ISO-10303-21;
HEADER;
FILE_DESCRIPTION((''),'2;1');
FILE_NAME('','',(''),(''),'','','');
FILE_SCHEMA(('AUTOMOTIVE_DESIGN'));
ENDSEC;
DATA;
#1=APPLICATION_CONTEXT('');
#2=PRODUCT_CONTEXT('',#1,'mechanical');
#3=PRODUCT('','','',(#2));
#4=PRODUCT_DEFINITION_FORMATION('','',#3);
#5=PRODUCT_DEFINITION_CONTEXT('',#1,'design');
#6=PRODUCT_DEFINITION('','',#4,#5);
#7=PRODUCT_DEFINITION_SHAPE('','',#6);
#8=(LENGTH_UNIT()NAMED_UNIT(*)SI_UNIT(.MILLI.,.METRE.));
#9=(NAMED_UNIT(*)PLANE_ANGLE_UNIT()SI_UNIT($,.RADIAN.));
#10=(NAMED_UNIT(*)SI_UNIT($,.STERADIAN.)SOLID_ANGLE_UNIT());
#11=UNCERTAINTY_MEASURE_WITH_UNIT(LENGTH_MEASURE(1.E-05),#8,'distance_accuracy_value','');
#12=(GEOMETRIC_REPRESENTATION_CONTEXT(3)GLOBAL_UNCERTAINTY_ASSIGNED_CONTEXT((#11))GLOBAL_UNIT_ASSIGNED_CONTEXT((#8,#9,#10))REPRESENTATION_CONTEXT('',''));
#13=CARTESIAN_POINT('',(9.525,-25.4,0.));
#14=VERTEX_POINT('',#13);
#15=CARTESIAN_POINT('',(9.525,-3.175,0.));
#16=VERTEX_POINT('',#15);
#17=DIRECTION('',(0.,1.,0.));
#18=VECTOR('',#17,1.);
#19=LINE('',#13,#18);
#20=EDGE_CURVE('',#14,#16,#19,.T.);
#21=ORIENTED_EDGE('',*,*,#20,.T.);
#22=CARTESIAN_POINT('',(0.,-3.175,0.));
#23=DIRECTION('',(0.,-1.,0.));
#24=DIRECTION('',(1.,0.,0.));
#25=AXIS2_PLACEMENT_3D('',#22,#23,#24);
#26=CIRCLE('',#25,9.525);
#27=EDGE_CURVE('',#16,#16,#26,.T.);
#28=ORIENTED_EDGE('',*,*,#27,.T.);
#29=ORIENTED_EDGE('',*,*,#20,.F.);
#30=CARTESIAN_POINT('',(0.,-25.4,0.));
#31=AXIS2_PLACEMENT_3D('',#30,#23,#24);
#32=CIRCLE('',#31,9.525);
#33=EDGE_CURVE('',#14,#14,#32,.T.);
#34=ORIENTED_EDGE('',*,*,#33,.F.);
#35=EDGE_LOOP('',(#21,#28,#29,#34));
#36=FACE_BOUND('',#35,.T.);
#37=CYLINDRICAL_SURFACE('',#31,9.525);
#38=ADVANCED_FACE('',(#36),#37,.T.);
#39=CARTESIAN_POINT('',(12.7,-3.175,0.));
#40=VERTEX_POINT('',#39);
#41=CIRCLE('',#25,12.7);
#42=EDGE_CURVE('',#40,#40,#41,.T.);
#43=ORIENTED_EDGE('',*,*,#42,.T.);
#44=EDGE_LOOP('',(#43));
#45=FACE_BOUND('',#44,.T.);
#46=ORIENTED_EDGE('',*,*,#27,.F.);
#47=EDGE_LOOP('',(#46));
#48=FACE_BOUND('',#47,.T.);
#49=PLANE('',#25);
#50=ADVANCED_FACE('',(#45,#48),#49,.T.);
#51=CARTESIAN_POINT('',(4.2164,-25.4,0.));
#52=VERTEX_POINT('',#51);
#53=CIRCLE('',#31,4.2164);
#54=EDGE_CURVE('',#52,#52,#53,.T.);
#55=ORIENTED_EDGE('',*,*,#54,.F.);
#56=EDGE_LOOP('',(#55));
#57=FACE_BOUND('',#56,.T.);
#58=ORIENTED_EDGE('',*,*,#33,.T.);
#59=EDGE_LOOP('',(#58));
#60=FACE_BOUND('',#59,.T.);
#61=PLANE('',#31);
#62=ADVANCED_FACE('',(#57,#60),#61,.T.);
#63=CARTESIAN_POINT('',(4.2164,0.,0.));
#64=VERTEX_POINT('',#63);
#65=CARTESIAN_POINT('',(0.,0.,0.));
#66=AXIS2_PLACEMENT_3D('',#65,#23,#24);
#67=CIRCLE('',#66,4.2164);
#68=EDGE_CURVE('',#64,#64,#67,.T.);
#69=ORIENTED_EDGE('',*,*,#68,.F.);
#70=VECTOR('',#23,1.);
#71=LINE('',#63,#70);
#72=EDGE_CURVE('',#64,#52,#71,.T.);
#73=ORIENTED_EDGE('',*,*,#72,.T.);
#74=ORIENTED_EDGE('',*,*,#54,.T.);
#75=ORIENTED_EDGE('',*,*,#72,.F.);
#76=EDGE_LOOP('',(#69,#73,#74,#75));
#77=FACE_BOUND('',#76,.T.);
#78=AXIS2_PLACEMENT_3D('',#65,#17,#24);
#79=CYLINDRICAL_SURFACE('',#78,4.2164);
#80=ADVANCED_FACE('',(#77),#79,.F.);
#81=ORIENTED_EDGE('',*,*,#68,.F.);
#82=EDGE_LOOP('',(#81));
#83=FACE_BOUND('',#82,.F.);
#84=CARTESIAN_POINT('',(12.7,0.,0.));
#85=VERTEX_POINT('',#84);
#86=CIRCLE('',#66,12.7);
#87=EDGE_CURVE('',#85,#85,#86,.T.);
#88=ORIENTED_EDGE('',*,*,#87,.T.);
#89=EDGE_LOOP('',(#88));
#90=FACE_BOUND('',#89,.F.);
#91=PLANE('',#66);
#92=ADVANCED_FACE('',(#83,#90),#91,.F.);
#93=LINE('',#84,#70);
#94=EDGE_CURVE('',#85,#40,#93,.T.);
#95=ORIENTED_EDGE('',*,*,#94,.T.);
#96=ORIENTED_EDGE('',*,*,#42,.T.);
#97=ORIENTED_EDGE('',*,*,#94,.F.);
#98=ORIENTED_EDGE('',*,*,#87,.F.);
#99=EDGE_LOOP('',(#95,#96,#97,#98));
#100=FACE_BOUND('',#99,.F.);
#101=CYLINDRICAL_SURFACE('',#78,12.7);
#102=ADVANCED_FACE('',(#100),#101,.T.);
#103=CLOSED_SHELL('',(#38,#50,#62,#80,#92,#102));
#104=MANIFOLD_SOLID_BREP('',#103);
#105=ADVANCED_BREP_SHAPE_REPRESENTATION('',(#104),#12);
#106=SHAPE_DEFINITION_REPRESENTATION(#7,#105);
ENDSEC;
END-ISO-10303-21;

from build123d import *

# Parameters (mm, degrees)
F0_R     = 12.7
F0_R_2   = 4.2164
F1_DEPTH = 25.4
F2_R     = 12.7
F2_R_2   = 9.525
F3_DEPTH = 22.225


# Not quite as in the source:
# - a length typed as a fraction of an inch, garbled in the dataset ("3 / 203.2 mm" for 3/8 in), is restored


with BuildPart() as f1:
    # F0 (on Front) → F1 (new body)
    with BuildSketch(Plane.XZ):
        Circle(F0_R)
        Circle(F0_R_2, mode=Mode.SUBTRACT)
    extrude(amount=F1_DEPTH)

    # F2 (on face) → F3 (cut)
    with BuildSketch(Plane.XZ.offset(25.4)):
        Circle(F2_R)
        Circle(F2_R_2, mode=Mode.SUBTRACT)
    extrude(amount=-F3_DEPTH, mode=Mode.SUBTRACT)


solid = f1.part
